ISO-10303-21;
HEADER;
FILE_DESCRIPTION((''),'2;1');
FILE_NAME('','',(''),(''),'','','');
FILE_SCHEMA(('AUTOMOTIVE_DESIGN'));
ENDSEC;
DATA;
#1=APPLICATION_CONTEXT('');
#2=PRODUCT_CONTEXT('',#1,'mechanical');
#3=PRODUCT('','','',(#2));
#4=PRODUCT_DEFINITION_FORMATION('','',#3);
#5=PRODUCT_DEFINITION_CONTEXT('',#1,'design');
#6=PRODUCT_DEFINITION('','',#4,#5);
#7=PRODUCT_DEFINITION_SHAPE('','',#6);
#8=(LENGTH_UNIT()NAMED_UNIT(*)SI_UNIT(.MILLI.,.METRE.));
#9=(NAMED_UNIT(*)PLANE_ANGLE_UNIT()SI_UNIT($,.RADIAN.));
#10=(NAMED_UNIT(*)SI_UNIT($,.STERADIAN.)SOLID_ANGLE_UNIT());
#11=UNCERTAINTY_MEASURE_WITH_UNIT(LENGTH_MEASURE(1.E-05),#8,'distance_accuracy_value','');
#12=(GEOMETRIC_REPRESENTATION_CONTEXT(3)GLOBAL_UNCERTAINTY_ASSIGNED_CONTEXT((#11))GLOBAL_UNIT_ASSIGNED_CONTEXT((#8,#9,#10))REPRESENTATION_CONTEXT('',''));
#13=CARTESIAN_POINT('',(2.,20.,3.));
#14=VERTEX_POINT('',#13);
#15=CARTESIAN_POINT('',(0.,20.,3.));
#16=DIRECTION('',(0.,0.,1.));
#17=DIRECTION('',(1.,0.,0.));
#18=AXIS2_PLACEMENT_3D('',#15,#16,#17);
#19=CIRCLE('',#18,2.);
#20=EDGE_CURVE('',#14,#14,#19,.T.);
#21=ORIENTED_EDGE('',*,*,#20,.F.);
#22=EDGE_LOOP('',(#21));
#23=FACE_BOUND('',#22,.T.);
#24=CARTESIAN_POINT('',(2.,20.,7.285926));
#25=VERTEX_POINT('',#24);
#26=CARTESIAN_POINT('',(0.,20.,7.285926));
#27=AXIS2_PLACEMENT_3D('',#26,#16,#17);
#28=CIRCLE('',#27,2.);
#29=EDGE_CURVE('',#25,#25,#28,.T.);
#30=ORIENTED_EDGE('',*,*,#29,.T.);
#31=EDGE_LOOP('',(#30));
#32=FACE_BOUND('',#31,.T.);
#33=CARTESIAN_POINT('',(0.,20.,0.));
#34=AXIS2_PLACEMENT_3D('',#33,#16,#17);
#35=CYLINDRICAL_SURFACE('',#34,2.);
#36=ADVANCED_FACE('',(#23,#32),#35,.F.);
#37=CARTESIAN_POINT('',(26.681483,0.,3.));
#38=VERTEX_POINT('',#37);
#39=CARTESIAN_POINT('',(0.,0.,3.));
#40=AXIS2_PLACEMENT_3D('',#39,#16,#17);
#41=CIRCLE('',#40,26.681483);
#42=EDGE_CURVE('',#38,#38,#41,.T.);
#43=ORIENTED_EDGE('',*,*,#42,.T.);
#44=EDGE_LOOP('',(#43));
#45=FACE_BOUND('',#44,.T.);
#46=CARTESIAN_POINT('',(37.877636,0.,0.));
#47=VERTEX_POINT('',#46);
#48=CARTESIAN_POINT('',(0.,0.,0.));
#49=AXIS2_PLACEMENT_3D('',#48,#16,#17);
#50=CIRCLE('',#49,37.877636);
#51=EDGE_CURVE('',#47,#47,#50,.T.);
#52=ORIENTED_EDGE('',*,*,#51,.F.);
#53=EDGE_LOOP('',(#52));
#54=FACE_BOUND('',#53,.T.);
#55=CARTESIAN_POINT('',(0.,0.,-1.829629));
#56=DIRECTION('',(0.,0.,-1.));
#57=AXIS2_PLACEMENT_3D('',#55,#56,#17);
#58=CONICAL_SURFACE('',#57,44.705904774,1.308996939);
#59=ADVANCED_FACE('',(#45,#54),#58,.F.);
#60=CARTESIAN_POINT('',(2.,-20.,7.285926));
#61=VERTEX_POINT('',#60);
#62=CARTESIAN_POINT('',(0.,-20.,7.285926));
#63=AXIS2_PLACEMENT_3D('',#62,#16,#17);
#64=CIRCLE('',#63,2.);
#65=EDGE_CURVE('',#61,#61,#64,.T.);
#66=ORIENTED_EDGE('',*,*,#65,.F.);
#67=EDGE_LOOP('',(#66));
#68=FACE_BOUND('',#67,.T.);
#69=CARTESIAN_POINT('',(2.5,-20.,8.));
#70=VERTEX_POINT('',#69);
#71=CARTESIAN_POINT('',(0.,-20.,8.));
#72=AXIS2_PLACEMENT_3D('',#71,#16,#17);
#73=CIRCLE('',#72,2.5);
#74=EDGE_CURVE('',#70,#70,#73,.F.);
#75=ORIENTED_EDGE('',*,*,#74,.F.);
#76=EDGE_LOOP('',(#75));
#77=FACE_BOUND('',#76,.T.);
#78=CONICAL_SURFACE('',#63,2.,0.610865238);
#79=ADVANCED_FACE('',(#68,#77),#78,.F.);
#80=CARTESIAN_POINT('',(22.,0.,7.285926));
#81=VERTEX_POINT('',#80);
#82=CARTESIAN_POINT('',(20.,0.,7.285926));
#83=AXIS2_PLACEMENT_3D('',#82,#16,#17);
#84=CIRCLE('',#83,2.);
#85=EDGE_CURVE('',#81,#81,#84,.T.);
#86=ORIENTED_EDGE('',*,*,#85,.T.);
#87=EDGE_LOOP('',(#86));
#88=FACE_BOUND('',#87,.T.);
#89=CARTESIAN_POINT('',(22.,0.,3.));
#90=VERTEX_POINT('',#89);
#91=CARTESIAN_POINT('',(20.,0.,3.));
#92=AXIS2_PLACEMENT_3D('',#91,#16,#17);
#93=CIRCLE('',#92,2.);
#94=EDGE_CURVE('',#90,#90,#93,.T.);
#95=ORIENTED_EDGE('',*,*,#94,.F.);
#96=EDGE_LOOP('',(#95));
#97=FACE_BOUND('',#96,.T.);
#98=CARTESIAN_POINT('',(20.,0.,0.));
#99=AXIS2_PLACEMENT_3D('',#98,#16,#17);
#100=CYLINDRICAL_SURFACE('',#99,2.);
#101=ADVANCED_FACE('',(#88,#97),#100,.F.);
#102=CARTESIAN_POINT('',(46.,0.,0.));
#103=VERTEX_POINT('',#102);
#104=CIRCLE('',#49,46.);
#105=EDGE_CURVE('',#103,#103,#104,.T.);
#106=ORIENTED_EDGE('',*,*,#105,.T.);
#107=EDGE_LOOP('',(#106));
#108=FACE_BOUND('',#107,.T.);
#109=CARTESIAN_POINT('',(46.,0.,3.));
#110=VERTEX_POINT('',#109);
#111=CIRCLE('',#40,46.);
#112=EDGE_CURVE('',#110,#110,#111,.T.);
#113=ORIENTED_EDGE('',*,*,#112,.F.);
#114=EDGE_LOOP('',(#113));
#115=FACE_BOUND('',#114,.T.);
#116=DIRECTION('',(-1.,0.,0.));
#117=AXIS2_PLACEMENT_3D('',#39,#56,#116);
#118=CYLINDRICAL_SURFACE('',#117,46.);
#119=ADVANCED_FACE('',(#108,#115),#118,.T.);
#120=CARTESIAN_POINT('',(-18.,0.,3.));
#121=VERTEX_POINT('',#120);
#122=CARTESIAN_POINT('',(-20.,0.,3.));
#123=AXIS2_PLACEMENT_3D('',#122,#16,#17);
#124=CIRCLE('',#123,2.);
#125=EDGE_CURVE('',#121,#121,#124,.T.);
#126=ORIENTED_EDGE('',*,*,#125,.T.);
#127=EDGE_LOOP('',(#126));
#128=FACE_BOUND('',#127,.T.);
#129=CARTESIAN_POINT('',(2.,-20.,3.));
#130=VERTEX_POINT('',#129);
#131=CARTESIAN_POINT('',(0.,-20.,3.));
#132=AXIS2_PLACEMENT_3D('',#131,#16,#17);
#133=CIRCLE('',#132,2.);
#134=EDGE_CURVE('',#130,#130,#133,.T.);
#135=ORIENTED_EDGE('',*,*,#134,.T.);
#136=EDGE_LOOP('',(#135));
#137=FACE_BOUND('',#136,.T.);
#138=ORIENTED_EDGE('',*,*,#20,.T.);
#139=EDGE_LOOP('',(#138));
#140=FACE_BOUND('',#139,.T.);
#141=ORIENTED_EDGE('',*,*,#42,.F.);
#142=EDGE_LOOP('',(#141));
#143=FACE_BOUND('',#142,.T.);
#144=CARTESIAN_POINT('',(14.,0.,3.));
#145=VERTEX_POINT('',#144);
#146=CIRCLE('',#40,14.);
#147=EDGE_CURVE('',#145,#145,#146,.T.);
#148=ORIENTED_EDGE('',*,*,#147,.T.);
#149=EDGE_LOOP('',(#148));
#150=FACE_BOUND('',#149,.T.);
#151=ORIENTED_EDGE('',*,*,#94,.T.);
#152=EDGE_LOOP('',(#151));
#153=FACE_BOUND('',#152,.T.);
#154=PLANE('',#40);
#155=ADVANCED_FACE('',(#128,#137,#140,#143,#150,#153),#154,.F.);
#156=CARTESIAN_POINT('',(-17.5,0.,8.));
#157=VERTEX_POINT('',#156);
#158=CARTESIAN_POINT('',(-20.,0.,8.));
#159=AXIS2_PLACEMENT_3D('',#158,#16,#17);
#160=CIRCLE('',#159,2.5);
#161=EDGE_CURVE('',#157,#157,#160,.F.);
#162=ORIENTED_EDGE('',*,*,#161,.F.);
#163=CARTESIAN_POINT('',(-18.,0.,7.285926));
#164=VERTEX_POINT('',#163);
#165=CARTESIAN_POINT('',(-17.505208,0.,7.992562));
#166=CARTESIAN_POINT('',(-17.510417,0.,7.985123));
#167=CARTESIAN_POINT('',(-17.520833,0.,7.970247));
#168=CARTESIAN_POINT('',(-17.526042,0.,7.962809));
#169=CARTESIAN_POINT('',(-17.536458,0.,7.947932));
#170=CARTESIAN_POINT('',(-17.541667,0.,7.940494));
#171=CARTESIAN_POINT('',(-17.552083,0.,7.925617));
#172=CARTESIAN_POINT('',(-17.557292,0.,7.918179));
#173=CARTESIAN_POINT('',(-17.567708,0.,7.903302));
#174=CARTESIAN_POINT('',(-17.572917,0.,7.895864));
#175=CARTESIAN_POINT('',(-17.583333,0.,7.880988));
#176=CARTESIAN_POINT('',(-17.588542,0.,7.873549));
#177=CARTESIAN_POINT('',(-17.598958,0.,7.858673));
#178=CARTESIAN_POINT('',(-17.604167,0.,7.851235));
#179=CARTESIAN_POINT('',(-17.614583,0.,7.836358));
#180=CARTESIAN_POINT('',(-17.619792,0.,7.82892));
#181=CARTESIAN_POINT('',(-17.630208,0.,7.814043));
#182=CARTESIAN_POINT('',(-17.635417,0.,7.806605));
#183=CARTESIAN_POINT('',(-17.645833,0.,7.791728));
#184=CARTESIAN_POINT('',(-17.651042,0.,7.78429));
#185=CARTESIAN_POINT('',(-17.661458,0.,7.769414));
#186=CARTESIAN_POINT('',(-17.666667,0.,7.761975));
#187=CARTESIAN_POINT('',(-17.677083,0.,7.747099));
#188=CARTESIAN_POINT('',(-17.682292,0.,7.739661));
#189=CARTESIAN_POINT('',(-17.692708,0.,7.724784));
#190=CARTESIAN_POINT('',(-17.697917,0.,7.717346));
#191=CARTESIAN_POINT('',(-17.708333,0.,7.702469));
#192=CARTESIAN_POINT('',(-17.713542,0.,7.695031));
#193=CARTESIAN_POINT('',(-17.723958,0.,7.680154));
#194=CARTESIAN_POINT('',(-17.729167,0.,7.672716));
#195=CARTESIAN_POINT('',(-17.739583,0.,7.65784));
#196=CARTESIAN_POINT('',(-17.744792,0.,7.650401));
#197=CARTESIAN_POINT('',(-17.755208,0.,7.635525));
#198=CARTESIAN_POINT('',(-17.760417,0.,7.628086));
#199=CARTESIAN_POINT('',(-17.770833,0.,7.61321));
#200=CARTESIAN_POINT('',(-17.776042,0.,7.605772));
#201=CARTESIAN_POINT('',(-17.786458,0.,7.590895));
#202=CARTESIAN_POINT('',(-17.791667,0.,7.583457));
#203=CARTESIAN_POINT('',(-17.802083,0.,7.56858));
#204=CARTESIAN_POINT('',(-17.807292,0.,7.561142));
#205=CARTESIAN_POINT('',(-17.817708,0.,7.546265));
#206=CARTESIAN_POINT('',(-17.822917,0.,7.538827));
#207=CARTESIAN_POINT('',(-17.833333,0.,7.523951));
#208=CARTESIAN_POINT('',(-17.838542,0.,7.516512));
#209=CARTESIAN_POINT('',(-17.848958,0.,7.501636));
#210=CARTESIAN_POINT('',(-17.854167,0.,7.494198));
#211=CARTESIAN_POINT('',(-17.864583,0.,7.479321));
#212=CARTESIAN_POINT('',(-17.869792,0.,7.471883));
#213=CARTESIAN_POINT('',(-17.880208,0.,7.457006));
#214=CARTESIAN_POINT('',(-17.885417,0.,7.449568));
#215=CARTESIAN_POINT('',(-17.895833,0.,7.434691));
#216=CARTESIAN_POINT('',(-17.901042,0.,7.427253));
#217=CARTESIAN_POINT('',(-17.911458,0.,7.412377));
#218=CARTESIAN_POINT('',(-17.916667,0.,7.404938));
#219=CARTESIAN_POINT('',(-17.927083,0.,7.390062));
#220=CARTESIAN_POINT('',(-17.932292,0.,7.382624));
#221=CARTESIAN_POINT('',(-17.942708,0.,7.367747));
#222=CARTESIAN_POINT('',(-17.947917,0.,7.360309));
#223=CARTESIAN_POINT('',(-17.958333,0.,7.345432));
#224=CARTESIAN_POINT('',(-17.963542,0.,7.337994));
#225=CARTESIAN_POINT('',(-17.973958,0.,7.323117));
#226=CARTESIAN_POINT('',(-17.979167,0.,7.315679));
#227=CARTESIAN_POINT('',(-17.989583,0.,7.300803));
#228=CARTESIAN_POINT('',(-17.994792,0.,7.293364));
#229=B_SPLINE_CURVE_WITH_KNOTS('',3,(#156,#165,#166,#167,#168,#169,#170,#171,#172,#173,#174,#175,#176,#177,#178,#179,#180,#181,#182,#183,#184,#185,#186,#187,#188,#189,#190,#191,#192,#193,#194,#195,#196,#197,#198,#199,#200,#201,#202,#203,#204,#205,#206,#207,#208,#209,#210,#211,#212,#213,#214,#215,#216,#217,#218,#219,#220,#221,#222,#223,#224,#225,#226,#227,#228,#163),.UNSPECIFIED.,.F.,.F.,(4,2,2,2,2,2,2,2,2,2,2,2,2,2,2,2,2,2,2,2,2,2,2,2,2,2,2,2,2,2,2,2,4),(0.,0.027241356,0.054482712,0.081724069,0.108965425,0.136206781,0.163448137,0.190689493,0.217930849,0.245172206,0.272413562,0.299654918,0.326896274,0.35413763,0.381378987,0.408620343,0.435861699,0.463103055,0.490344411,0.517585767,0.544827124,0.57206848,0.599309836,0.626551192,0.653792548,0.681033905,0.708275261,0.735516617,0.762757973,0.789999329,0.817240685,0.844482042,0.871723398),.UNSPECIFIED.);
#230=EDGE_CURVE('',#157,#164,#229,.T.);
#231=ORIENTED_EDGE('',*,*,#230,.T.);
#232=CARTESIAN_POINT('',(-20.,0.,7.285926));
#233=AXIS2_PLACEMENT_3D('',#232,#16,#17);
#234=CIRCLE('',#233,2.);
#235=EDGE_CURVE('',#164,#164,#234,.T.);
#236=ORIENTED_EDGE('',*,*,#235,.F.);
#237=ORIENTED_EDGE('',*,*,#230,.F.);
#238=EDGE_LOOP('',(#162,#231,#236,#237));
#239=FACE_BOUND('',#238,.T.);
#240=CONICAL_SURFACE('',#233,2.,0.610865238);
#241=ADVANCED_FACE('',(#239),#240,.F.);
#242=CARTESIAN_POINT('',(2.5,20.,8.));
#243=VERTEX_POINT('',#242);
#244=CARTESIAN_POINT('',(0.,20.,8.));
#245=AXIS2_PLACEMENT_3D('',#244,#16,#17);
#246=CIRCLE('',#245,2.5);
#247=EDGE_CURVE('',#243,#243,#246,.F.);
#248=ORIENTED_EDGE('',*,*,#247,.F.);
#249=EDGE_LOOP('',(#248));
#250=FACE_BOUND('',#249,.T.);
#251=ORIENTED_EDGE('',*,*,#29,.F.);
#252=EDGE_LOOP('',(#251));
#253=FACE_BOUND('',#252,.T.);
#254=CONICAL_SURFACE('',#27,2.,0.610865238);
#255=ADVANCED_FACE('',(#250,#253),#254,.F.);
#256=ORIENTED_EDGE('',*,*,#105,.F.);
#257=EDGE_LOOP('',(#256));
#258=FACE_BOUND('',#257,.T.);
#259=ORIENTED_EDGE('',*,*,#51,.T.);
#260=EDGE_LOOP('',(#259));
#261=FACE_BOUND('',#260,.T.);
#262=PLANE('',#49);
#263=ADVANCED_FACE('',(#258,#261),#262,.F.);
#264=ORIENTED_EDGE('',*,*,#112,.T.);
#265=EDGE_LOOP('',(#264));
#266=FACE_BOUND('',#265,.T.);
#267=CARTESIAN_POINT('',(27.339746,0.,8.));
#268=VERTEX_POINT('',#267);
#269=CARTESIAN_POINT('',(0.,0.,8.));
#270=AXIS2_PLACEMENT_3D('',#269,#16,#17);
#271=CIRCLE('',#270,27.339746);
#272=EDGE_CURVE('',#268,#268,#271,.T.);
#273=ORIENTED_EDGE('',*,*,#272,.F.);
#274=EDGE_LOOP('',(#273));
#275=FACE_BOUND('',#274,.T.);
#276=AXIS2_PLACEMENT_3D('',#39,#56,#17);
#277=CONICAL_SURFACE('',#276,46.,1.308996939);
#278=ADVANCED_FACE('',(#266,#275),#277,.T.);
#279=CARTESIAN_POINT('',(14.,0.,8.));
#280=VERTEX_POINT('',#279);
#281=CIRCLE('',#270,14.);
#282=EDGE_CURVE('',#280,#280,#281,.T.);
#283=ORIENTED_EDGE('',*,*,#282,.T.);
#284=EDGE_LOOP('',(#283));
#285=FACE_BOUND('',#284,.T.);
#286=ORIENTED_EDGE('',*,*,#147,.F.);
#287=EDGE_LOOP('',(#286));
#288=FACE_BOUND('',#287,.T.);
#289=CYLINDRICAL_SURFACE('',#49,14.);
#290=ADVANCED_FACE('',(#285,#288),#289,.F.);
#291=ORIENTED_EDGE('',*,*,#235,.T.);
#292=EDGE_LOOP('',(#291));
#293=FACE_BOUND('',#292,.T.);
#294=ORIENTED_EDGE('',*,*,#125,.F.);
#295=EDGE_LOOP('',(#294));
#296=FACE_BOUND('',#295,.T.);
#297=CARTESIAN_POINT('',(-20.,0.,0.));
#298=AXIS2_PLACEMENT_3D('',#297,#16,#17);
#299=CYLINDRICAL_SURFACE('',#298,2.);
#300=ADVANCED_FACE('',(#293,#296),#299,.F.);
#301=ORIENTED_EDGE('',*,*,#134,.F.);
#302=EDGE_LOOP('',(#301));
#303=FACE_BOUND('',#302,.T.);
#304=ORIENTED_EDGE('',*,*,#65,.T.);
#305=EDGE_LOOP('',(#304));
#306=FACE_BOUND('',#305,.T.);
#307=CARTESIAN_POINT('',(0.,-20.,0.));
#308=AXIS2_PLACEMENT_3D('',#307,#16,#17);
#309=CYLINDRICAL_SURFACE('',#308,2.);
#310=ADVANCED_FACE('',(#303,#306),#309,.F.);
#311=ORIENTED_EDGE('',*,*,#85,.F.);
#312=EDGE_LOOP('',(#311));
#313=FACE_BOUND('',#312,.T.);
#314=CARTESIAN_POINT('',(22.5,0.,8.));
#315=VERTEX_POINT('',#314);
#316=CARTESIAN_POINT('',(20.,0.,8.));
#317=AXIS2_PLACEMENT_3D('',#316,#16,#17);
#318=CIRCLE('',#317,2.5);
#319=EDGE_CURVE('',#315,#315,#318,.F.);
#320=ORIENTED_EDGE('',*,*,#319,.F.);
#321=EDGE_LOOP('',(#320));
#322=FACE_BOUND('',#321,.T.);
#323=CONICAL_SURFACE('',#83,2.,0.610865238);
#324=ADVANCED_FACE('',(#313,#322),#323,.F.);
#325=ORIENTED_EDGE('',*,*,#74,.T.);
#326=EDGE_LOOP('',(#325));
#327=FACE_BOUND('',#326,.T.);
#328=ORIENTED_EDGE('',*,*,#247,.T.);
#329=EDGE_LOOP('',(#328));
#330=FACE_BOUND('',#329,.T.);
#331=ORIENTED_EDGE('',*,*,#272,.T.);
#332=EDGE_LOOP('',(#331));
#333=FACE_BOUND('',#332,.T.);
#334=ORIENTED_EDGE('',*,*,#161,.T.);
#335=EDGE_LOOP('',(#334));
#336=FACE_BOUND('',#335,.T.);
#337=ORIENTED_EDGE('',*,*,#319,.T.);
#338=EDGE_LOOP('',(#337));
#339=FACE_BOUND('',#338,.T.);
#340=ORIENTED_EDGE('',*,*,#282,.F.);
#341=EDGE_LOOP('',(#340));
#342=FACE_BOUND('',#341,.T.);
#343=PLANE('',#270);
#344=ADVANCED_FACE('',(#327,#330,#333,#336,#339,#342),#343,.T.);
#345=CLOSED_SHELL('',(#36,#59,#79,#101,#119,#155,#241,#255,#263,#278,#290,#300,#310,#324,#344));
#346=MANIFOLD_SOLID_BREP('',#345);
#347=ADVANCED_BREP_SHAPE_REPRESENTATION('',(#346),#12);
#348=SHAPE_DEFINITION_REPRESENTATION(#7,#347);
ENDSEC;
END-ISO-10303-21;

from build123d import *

# Parameters (mm, degrees)
ESQUISSE1_R             = 46
BOSS_EXTRU_1_DEPTH      = 3
ESQUISSE2_R             = 46
BOSS_EXTRU_2_DEPTH      = 5
BOSS_EXTRU_2_TAPER      = 75
ESQUISSE3_R             = 2
ENL_V_MAT_EXTRU_1_DEPTH = 66.543878433
ESQUISSE4_R             = 14
ENL_V_MAT_EXTRU_2_DEPTH = 66.543878433
CHANFREIN1_SIZE         = 0.5
CHANFREIN1_SIZE2        = 0.714074003


# Read off the part's stored shape, not the designer's step: Coque1
with BuildPart() as part:
    # Esquisse1 → Boss.-Extru.1 (new body)
    with BuildSketch(Plane.XY):
        Circle(ESQUISSE1_R)
    extrude(amount=BOSS_EXTRU_1_DEPTH)

    # Esquisse2 → Boss.-Extru.2 (add)
    with BuildSketch(Plane.XY.offset(3)):
        Circle(ESQUISSE2_R)
    extrude(amount=BOSS_EXTRU_2_DEPTH, taper=BOSS_EXTRU_2_TAPER)

    # Coque1 outline → Coque1 (revolve, cut)
    with BuildSketch(Plane.XZ):
        Polygon((37.877635897, 0), (26.681483474, 3), (0, 3), (0, 0), align=None)
    revolve(axis=Axis((0, 0, 0), (0, 0, 1)), mode=Mode.SUBTRACT)

    # Esquisse3 → Enlèv. mat.-Extru.1 (cut, through all)
    with BuildSketch(Plane.XY.offset(8)):
        with Locations((0, 20)):
            Circle(ESQUISSE3_R)
        with Locations((20, 0)):
            Circle(ESQUISSE3_R)
        with Locations((0, -20)):
            Circle(ESQUISSE3_R)
        with Locations((-20, 0)):
            Circle(ESQUISSE3_R)
    extrude(amount=-ENL_V_MAT_EXTRU_1_DEPTH, mode=Mode.SUBTRACT)

    # Esquisse4 → Enlèv. mat.-Extru.2 (cut, through all)
    with BuildSketch(Plane.XY.offset(8)):
        Circle(ESQUISSE4_R)
    extrude(amount=-ENL_V_MAT_EXTRU_2_DEPTH, mode=Mode.SUBTRACT)

    # Chanfrein1
    chanfrein1_edges = [part.edges().sort_by_distance(p)[0] for p in [
        (-2, 20, 8),
        (18, 0, 8),
        (-2, -20, 8),
        (-22, 0, 8),
    ]]
    chanfrein1_side = [part.faces().sort_by_distance(p)[0] for p in [
        (-26.566461172, 0, 8),
    ]]
    chamfer(chanfrein1_edges, length=CHANFREIN1_SIZE, length2=CHANFREIN1_SIZE2, reference=chanfrein1_side[0])


solid = part.part
